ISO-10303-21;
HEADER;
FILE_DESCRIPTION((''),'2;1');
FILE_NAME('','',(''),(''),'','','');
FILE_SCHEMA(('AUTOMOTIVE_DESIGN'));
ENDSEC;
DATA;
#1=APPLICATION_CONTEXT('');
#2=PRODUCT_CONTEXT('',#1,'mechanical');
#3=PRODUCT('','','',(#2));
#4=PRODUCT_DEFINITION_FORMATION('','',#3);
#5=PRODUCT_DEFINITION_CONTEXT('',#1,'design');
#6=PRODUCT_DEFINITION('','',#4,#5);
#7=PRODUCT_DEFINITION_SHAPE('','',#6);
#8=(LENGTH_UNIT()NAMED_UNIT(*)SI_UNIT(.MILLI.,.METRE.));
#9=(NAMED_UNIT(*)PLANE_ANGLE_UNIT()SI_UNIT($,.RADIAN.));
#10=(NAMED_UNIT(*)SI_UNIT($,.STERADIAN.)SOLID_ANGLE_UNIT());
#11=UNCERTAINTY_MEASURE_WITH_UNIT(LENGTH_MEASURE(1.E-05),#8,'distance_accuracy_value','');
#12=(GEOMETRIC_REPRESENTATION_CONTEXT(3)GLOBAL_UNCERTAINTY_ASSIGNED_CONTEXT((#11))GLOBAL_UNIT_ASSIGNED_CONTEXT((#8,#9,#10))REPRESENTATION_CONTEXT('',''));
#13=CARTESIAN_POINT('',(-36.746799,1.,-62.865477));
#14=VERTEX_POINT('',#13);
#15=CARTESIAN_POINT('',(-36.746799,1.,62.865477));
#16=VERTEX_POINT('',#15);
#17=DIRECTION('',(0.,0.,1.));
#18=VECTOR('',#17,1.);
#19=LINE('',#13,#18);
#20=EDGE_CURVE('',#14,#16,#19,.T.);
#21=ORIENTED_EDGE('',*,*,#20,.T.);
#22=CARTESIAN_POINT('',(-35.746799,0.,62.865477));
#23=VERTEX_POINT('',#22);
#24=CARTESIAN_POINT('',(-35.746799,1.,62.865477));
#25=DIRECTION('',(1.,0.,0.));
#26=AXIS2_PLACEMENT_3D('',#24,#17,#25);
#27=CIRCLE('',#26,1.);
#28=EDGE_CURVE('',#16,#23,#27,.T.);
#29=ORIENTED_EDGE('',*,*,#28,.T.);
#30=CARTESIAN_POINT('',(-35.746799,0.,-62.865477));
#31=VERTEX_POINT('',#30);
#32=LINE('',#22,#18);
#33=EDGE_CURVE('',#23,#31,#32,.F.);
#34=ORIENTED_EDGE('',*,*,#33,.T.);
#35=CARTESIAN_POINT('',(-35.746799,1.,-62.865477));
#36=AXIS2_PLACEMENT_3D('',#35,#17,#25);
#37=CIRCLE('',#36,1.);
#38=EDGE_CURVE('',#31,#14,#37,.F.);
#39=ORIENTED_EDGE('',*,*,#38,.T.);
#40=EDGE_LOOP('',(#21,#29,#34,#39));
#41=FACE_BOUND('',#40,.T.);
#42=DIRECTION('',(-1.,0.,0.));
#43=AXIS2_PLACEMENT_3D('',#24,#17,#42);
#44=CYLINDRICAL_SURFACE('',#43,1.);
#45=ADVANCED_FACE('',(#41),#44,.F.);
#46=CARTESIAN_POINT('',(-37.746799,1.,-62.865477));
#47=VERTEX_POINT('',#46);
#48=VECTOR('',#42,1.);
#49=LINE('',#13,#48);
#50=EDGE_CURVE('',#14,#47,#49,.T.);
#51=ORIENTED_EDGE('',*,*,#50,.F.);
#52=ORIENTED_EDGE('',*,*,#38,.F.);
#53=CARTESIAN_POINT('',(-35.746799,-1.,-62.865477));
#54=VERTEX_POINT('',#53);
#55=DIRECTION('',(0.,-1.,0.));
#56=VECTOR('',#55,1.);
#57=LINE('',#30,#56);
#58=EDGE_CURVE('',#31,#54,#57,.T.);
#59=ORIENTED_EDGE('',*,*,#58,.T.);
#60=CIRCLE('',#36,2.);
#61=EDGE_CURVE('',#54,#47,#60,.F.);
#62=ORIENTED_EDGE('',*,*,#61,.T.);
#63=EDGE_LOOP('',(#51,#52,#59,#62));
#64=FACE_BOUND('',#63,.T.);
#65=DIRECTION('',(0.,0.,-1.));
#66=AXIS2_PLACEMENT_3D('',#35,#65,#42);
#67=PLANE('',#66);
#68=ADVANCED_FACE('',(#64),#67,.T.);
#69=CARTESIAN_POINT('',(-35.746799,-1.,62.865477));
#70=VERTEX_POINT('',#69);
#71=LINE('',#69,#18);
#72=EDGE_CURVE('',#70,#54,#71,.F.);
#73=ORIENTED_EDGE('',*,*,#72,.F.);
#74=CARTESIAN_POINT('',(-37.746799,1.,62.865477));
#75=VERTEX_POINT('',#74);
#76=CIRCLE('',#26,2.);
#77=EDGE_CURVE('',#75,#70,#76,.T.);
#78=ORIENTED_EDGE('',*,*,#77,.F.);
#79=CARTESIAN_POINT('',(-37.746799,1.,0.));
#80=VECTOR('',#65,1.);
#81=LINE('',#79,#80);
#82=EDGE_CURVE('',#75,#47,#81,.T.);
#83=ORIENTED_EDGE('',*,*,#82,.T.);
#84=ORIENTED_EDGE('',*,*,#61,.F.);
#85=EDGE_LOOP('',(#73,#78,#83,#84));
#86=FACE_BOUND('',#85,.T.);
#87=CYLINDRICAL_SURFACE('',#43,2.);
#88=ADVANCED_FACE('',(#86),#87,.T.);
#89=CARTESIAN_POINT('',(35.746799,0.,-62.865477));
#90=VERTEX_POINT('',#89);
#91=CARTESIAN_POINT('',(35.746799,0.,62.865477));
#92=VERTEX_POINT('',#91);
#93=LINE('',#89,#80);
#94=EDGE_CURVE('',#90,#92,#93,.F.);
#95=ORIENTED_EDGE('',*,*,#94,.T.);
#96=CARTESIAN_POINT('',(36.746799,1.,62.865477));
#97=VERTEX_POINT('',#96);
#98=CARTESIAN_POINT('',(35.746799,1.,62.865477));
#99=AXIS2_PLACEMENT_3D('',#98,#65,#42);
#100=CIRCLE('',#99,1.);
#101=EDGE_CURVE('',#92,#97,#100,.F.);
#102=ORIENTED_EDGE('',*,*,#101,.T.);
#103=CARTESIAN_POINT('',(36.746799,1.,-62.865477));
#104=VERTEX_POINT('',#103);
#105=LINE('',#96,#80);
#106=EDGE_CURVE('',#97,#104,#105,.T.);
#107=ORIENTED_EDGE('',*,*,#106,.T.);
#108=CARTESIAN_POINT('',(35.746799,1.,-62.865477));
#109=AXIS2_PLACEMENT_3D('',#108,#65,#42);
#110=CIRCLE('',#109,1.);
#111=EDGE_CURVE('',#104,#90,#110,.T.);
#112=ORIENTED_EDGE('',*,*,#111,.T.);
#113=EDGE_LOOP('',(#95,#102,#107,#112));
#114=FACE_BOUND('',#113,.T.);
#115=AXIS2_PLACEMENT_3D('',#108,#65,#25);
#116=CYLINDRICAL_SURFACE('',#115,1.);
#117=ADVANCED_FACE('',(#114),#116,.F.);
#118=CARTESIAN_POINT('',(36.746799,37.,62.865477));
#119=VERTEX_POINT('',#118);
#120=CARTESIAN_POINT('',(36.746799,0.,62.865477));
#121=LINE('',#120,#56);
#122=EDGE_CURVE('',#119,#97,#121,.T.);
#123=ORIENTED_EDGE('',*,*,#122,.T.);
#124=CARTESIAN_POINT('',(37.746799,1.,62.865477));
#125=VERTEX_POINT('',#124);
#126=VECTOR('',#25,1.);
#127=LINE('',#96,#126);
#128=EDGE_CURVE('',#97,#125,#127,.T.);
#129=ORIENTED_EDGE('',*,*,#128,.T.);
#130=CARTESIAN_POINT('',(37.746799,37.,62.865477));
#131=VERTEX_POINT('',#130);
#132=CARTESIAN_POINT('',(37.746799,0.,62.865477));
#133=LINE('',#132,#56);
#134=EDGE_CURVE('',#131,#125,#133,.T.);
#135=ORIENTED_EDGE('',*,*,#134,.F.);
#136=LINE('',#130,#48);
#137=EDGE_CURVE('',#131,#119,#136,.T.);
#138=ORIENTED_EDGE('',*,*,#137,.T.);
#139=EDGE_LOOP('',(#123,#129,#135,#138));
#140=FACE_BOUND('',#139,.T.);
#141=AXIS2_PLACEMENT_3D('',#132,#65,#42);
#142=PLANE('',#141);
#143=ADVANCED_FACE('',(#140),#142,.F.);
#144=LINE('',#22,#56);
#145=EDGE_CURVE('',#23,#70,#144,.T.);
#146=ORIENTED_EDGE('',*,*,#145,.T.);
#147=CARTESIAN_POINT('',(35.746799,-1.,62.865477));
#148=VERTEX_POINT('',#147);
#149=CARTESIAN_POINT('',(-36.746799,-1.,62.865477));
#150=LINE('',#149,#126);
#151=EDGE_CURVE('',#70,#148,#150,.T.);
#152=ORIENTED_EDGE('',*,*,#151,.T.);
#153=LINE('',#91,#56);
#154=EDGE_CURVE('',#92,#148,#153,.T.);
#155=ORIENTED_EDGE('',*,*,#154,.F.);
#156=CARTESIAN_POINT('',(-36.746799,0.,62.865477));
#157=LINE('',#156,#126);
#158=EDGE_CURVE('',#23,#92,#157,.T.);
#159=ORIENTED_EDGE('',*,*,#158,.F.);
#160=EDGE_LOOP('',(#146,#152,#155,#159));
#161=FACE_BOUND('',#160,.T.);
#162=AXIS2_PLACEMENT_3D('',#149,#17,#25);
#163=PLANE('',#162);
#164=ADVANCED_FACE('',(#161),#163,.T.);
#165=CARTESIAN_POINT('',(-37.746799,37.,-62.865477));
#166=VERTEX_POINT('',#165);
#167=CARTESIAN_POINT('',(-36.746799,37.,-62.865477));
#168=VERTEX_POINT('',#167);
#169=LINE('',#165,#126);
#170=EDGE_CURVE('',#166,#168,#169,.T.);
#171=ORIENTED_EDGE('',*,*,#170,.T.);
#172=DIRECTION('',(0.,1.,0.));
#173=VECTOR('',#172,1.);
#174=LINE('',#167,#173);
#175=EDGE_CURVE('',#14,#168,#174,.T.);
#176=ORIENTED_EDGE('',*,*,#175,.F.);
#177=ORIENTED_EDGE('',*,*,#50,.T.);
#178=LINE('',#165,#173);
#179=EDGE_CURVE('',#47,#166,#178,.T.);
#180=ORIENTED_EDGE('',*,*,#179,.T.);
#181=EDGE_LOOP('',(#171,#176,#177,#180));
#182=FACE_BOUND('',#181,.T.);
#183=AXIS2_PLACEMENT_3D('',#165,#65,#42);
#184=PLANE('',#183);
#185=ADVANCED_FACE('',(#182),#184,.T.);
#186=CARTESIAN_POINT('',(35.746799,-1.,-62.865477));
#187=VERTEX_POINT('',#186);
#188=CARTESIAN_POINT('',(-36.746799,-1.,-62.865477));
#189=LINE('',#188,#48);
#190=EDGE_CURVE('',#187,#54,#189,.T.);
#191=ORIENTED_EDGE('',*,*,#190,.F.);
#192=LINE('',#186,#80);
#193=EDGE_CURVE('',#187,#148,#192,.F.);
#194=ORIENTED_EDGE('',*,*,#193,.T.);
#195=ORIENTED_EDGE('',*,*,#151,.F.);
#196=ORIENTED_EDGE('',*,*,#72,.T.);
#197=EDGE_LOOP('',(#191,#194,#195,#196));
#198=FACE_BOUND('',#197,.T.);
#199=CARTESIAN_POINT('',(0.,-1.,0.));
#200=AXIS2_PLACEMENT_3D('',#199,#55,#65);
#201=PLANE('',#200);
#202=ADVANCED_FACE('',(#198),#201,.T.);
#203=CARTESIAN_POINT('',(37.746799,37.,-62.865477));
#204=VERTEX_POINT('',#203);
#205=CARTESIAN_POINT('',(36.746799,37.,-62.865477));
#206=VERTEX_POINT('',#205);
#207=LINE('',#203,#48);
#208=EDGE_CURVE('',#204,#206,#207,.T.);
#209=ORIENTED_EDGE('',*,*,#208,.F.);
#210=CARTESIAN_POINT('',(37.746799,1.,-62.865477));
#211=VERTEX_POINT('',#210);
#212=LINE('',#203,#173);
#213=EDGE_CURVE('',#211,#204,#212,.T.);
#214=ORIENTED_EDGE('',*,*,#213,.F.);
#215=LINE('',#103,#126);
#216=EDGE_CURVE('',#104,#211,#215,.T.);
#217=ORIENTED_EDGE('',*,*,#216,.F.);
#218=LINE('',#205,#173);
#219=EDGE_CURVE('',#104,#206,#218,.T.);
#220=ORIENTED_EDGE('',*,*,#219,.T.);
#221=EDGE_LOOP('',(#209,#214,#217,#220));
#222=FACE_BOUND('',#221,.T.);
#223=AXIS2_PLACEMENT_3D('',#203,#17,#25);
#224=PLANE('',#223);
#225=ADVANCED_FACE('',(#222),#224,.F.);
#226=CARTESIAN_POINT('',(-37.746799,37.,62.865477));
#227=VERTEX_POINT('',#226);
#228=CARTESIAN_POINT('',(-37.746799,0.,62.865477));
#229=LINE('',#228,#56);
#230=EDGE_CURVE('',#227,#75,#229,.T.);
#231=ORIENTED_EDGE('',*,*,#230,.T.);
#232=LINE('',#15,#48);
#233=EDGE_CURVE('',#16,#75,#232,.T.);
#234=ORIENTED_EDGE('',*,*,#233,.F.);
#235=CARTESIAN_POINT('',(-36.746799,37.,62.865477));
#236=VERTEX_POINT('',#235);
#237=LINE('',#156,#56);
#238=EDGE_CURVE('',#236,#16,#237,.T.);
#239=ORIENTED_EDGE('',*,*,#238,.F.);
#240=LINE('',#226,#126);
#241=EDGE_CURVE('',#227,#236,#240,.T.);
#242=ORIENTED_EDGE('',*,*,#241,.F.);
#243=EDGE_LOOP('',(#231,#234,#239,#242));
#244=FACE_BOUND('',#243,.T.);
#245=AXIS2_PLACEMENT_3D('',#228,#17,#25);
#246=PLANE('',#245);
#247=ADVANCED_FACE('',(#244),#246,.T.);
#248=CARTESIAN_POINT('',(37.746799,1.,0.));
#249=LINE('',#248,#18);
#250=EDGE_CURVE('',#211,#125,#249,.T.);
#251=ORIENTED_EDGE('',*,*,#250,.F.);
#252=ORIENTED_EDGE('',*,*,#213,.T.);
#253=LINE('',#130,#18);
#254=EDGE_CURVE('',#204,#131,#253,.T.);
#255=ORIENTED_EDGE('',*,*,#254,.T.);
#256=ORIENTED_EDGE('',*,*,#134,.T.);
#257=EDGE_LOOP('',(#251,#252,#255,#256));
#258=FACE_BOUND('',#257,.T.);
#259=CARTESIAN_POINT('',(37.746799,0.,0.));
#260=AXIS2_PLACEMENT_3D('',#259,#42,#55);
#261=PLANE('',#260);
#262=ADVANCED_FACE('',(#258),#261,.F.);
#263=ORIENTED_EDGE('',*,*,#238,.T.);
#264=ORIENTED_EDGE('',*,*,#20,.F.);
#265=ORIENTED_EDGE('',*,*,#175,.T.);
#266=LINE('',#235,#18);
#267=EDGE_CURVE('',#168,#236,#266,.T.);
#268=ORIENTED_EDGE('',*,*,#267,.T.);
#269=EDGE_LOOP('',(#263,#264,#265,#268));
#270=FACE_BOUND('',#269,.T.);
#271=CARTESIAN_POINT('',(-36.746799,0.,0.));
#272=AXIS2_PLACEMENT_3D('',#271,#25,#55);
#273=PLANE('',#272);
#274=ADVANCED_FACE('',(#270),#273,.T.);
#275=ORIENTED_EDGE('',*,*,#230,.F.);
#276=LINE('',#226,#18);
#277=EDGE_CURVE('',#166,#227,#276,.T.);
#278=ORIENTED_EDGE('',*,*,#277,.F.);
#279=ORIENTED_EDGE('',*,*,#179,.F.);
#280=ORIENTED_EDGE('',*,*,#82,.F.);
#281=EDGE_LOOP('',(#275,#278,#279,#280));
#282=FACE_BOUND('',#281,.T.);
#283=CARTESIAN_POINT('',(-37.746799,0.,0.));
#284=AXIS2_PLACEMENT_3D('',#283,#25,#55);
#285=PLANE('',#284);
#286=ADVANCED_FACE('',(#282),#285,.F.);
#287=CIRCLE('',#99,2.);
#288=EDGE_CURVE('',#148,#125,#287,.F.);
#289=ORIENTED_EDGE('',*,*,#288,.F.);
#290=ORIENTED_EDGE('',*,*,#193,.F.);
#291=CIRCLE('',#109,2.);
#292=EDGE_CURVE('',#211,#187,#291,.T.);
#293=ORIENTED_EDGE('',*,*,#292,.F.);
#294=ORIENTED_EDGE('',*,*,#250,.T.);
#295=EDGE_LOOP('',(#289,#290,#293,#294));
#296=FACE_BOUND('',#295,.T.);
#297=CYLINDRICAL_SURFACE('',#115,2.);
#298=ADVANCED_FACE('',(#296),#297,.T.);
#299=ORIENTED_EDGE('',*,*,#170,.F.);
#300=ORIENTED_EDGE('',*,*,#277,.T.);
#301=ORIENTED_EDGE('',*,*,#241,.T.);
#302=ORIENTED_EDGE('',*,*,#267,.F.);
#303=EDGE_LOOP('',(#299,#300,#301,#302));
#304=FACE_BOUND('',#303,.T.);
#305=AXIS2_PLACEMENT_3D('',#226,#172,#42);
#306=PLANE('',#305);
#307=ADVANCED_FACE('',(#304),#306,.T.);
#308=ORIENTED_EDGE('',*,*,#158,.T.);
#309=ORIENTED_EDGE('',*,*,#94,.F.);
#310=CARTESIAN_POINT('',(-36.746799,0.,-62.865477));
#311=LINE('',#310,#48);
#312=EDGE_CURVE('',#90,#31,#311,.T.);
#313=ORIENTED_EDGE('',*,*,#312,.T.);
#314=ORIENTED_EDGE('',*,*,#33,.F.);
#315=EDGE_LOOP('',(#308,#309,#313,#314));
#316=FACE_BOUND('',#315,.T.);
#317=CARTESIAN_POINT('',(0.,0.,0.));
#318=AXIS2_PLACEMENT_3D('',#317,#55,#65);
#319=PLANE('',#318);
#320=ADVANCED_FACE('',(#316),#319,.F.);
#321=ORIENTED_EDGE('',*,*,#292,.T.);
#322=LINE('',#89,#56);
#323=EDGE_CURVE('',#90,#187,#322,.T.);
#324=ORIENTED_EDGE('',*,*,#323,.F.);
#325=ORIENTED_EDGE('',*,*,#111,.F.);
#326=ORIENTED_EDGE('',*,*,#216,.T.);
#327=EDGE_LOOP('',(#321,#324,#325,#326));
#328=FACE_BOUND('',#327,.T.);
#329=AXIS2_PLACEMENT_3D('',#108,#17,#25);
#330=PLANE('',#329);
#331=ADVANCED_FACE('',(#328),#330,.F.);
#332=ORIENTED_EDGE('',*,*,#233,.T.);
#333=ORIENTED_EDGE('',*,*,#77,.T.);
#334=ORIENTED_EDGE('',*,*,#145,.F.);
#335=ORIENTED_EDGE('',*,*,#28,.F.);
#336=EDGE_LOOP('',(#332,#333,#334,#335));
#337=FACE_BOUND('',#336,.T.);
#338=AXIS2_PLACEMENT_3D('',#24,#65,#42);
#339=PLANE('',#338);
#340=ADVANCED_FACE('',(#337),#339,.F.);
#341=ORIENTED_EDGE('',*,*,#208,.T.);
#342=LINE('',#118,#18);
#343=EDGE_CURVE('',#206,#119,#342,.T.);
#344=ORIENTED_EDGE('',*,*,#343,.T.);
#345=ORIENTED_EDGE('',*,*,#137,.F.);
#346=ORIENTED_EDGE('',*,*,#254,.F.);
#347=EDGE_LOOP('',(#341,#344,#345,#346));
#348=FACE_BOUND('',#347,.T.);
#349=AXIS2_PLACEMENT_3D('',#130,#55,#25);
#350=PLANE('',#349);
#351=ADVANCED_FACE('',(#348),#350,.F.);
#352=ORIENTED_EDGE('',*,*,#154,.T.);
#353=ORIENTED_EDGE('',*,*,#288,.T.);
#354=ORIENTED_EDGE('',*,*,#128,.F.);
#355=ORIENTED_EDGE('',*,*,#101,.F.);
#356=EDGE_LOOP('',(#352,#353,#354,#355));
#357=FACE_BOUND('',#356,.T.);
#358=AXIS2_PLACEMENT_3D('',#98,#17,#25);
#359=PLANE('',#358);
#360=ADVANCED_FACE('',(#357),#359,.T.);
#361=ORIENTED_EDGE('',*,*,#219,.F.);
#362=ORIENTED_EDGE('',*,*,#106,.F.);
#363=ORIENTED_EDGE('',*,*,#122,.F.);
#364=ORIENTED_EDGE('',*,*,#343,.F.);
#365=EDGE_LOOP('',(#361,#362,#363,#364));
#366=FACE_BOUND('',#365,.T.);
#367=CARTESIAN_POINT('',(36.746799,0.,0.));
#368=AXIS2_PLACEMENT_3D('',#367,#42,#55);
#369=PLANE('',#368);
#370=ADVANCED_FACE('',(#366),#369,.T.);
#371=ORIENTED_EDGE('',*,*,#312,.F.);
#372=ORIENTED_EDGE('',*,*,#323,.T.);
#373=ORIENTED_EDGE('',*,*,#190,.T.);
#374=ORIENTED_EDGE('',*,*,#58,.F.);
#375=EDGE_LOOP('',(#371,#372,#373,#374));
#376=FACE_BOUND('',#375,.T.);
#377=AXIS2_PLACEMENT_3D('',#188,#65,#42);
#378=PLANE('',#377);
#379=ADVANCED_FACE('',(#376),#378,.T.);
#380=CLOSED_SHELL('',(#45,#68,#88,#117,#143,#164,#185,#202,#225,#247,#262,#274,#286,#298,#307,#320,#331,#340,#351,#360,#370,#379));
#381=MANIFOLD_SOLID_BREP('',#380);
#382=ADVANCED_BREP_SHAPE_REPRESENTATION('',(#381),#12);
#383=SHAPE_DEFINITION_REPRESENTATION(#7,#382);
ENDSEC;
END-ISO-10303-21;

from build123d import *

# Parameters (mm, degrees)
SKETCH_2_W                       = 73.493597356
SKETCH_2_H                       = 125.730953214
SM_BASE_FLANGE_1_DEPTH           = 1
SM_EDGE_FLANGE_1_STRIP_W         = 6
SM_EDGE_FLANGE_1_STRIP_H         = 1
SM_EDGE_FLANGE_1_STRIP_CUT_DEPTH = 125.730953215
SM_EDGE_FLANGE_1_DEPTH           = 125.730953215


# Sheet-metal steps are written as plain solids
with BuildPart() as part:
    # Sketch 2 → Базовая кромка1 (new body)
    with BuildSketch(Plane(origin=(0, 0, 0), x_dir=(1, 0, 0), z_dir=(0, 1, 0))):
        Rectangle(SKETCH_2_W, SKETCH_2_H)
    extrude(amount=-SM_BASE_FLANGE_1_DEPTH)

    # Ребро-кромка1 strip (across the edge) → Ребро-кромка1 strip cut (cut)
    with BuildSketch(Plane(origin=(36.746798678, 0, 62.865476607), x_dir=(-1, 0, 0), z_dir=(0, 0, -1))):
        with Locations((-2, -0.5)):
            Rectangle(SM_EDGE_FLANGE_1_STRIP_W, SM_EDGE_FLANGE_1_STRIP_H)
    sm_edge_flange_1_strip_cut = extrude(amount=SM_EDGE_FLANGE_1_STRIP_CUT_DEPTH, mode=Mode.SUBTRACT)

    # Ребро-кромка1 section (across the edge) → Ребро-кромка1 (add)
    with BuildSketch(Plane(origin=(36.746798678, 0, 62.865476607), x_dir=(-1, 0, 0), z_dir=(0, 0, -1))):
        with BuildLine():
            Line((-1, 1), (-1, 37))
            Line((-1, 37), (0, 37))
            Line((0, 37), (0, 1))
            ThreePointArc((0, 1), (0.292893219, 0.292893219), (1, 0))
            Line((1, 0), (1, -1))
            ThreePointArc((1, -1), (-0.414213562, -0.414213562), (-1, 1))
        make_face()
    sm_edge_flange_1 = extrude(amount=SM_EDGE_FLANGE_1_DEPTH)

    # Зеркальное отражение1: Ребро-кромка1 strip cut, Ребро-кромка1 across plane
    add(sm_edge_flange_1_strip_cut.mirror(Plane(origin=(0, 0, 0), x_dir=(0, 0, 1), z_dir=(1, 0, 0))), mode=Mode.SUBTRACT)
    add(sm_edge_flange_1.mirror(Plane(origin=(0, 0, 0), x_dir=(0, 0, 1), z_dir=(1, 0, 0))))


solid = part.part
